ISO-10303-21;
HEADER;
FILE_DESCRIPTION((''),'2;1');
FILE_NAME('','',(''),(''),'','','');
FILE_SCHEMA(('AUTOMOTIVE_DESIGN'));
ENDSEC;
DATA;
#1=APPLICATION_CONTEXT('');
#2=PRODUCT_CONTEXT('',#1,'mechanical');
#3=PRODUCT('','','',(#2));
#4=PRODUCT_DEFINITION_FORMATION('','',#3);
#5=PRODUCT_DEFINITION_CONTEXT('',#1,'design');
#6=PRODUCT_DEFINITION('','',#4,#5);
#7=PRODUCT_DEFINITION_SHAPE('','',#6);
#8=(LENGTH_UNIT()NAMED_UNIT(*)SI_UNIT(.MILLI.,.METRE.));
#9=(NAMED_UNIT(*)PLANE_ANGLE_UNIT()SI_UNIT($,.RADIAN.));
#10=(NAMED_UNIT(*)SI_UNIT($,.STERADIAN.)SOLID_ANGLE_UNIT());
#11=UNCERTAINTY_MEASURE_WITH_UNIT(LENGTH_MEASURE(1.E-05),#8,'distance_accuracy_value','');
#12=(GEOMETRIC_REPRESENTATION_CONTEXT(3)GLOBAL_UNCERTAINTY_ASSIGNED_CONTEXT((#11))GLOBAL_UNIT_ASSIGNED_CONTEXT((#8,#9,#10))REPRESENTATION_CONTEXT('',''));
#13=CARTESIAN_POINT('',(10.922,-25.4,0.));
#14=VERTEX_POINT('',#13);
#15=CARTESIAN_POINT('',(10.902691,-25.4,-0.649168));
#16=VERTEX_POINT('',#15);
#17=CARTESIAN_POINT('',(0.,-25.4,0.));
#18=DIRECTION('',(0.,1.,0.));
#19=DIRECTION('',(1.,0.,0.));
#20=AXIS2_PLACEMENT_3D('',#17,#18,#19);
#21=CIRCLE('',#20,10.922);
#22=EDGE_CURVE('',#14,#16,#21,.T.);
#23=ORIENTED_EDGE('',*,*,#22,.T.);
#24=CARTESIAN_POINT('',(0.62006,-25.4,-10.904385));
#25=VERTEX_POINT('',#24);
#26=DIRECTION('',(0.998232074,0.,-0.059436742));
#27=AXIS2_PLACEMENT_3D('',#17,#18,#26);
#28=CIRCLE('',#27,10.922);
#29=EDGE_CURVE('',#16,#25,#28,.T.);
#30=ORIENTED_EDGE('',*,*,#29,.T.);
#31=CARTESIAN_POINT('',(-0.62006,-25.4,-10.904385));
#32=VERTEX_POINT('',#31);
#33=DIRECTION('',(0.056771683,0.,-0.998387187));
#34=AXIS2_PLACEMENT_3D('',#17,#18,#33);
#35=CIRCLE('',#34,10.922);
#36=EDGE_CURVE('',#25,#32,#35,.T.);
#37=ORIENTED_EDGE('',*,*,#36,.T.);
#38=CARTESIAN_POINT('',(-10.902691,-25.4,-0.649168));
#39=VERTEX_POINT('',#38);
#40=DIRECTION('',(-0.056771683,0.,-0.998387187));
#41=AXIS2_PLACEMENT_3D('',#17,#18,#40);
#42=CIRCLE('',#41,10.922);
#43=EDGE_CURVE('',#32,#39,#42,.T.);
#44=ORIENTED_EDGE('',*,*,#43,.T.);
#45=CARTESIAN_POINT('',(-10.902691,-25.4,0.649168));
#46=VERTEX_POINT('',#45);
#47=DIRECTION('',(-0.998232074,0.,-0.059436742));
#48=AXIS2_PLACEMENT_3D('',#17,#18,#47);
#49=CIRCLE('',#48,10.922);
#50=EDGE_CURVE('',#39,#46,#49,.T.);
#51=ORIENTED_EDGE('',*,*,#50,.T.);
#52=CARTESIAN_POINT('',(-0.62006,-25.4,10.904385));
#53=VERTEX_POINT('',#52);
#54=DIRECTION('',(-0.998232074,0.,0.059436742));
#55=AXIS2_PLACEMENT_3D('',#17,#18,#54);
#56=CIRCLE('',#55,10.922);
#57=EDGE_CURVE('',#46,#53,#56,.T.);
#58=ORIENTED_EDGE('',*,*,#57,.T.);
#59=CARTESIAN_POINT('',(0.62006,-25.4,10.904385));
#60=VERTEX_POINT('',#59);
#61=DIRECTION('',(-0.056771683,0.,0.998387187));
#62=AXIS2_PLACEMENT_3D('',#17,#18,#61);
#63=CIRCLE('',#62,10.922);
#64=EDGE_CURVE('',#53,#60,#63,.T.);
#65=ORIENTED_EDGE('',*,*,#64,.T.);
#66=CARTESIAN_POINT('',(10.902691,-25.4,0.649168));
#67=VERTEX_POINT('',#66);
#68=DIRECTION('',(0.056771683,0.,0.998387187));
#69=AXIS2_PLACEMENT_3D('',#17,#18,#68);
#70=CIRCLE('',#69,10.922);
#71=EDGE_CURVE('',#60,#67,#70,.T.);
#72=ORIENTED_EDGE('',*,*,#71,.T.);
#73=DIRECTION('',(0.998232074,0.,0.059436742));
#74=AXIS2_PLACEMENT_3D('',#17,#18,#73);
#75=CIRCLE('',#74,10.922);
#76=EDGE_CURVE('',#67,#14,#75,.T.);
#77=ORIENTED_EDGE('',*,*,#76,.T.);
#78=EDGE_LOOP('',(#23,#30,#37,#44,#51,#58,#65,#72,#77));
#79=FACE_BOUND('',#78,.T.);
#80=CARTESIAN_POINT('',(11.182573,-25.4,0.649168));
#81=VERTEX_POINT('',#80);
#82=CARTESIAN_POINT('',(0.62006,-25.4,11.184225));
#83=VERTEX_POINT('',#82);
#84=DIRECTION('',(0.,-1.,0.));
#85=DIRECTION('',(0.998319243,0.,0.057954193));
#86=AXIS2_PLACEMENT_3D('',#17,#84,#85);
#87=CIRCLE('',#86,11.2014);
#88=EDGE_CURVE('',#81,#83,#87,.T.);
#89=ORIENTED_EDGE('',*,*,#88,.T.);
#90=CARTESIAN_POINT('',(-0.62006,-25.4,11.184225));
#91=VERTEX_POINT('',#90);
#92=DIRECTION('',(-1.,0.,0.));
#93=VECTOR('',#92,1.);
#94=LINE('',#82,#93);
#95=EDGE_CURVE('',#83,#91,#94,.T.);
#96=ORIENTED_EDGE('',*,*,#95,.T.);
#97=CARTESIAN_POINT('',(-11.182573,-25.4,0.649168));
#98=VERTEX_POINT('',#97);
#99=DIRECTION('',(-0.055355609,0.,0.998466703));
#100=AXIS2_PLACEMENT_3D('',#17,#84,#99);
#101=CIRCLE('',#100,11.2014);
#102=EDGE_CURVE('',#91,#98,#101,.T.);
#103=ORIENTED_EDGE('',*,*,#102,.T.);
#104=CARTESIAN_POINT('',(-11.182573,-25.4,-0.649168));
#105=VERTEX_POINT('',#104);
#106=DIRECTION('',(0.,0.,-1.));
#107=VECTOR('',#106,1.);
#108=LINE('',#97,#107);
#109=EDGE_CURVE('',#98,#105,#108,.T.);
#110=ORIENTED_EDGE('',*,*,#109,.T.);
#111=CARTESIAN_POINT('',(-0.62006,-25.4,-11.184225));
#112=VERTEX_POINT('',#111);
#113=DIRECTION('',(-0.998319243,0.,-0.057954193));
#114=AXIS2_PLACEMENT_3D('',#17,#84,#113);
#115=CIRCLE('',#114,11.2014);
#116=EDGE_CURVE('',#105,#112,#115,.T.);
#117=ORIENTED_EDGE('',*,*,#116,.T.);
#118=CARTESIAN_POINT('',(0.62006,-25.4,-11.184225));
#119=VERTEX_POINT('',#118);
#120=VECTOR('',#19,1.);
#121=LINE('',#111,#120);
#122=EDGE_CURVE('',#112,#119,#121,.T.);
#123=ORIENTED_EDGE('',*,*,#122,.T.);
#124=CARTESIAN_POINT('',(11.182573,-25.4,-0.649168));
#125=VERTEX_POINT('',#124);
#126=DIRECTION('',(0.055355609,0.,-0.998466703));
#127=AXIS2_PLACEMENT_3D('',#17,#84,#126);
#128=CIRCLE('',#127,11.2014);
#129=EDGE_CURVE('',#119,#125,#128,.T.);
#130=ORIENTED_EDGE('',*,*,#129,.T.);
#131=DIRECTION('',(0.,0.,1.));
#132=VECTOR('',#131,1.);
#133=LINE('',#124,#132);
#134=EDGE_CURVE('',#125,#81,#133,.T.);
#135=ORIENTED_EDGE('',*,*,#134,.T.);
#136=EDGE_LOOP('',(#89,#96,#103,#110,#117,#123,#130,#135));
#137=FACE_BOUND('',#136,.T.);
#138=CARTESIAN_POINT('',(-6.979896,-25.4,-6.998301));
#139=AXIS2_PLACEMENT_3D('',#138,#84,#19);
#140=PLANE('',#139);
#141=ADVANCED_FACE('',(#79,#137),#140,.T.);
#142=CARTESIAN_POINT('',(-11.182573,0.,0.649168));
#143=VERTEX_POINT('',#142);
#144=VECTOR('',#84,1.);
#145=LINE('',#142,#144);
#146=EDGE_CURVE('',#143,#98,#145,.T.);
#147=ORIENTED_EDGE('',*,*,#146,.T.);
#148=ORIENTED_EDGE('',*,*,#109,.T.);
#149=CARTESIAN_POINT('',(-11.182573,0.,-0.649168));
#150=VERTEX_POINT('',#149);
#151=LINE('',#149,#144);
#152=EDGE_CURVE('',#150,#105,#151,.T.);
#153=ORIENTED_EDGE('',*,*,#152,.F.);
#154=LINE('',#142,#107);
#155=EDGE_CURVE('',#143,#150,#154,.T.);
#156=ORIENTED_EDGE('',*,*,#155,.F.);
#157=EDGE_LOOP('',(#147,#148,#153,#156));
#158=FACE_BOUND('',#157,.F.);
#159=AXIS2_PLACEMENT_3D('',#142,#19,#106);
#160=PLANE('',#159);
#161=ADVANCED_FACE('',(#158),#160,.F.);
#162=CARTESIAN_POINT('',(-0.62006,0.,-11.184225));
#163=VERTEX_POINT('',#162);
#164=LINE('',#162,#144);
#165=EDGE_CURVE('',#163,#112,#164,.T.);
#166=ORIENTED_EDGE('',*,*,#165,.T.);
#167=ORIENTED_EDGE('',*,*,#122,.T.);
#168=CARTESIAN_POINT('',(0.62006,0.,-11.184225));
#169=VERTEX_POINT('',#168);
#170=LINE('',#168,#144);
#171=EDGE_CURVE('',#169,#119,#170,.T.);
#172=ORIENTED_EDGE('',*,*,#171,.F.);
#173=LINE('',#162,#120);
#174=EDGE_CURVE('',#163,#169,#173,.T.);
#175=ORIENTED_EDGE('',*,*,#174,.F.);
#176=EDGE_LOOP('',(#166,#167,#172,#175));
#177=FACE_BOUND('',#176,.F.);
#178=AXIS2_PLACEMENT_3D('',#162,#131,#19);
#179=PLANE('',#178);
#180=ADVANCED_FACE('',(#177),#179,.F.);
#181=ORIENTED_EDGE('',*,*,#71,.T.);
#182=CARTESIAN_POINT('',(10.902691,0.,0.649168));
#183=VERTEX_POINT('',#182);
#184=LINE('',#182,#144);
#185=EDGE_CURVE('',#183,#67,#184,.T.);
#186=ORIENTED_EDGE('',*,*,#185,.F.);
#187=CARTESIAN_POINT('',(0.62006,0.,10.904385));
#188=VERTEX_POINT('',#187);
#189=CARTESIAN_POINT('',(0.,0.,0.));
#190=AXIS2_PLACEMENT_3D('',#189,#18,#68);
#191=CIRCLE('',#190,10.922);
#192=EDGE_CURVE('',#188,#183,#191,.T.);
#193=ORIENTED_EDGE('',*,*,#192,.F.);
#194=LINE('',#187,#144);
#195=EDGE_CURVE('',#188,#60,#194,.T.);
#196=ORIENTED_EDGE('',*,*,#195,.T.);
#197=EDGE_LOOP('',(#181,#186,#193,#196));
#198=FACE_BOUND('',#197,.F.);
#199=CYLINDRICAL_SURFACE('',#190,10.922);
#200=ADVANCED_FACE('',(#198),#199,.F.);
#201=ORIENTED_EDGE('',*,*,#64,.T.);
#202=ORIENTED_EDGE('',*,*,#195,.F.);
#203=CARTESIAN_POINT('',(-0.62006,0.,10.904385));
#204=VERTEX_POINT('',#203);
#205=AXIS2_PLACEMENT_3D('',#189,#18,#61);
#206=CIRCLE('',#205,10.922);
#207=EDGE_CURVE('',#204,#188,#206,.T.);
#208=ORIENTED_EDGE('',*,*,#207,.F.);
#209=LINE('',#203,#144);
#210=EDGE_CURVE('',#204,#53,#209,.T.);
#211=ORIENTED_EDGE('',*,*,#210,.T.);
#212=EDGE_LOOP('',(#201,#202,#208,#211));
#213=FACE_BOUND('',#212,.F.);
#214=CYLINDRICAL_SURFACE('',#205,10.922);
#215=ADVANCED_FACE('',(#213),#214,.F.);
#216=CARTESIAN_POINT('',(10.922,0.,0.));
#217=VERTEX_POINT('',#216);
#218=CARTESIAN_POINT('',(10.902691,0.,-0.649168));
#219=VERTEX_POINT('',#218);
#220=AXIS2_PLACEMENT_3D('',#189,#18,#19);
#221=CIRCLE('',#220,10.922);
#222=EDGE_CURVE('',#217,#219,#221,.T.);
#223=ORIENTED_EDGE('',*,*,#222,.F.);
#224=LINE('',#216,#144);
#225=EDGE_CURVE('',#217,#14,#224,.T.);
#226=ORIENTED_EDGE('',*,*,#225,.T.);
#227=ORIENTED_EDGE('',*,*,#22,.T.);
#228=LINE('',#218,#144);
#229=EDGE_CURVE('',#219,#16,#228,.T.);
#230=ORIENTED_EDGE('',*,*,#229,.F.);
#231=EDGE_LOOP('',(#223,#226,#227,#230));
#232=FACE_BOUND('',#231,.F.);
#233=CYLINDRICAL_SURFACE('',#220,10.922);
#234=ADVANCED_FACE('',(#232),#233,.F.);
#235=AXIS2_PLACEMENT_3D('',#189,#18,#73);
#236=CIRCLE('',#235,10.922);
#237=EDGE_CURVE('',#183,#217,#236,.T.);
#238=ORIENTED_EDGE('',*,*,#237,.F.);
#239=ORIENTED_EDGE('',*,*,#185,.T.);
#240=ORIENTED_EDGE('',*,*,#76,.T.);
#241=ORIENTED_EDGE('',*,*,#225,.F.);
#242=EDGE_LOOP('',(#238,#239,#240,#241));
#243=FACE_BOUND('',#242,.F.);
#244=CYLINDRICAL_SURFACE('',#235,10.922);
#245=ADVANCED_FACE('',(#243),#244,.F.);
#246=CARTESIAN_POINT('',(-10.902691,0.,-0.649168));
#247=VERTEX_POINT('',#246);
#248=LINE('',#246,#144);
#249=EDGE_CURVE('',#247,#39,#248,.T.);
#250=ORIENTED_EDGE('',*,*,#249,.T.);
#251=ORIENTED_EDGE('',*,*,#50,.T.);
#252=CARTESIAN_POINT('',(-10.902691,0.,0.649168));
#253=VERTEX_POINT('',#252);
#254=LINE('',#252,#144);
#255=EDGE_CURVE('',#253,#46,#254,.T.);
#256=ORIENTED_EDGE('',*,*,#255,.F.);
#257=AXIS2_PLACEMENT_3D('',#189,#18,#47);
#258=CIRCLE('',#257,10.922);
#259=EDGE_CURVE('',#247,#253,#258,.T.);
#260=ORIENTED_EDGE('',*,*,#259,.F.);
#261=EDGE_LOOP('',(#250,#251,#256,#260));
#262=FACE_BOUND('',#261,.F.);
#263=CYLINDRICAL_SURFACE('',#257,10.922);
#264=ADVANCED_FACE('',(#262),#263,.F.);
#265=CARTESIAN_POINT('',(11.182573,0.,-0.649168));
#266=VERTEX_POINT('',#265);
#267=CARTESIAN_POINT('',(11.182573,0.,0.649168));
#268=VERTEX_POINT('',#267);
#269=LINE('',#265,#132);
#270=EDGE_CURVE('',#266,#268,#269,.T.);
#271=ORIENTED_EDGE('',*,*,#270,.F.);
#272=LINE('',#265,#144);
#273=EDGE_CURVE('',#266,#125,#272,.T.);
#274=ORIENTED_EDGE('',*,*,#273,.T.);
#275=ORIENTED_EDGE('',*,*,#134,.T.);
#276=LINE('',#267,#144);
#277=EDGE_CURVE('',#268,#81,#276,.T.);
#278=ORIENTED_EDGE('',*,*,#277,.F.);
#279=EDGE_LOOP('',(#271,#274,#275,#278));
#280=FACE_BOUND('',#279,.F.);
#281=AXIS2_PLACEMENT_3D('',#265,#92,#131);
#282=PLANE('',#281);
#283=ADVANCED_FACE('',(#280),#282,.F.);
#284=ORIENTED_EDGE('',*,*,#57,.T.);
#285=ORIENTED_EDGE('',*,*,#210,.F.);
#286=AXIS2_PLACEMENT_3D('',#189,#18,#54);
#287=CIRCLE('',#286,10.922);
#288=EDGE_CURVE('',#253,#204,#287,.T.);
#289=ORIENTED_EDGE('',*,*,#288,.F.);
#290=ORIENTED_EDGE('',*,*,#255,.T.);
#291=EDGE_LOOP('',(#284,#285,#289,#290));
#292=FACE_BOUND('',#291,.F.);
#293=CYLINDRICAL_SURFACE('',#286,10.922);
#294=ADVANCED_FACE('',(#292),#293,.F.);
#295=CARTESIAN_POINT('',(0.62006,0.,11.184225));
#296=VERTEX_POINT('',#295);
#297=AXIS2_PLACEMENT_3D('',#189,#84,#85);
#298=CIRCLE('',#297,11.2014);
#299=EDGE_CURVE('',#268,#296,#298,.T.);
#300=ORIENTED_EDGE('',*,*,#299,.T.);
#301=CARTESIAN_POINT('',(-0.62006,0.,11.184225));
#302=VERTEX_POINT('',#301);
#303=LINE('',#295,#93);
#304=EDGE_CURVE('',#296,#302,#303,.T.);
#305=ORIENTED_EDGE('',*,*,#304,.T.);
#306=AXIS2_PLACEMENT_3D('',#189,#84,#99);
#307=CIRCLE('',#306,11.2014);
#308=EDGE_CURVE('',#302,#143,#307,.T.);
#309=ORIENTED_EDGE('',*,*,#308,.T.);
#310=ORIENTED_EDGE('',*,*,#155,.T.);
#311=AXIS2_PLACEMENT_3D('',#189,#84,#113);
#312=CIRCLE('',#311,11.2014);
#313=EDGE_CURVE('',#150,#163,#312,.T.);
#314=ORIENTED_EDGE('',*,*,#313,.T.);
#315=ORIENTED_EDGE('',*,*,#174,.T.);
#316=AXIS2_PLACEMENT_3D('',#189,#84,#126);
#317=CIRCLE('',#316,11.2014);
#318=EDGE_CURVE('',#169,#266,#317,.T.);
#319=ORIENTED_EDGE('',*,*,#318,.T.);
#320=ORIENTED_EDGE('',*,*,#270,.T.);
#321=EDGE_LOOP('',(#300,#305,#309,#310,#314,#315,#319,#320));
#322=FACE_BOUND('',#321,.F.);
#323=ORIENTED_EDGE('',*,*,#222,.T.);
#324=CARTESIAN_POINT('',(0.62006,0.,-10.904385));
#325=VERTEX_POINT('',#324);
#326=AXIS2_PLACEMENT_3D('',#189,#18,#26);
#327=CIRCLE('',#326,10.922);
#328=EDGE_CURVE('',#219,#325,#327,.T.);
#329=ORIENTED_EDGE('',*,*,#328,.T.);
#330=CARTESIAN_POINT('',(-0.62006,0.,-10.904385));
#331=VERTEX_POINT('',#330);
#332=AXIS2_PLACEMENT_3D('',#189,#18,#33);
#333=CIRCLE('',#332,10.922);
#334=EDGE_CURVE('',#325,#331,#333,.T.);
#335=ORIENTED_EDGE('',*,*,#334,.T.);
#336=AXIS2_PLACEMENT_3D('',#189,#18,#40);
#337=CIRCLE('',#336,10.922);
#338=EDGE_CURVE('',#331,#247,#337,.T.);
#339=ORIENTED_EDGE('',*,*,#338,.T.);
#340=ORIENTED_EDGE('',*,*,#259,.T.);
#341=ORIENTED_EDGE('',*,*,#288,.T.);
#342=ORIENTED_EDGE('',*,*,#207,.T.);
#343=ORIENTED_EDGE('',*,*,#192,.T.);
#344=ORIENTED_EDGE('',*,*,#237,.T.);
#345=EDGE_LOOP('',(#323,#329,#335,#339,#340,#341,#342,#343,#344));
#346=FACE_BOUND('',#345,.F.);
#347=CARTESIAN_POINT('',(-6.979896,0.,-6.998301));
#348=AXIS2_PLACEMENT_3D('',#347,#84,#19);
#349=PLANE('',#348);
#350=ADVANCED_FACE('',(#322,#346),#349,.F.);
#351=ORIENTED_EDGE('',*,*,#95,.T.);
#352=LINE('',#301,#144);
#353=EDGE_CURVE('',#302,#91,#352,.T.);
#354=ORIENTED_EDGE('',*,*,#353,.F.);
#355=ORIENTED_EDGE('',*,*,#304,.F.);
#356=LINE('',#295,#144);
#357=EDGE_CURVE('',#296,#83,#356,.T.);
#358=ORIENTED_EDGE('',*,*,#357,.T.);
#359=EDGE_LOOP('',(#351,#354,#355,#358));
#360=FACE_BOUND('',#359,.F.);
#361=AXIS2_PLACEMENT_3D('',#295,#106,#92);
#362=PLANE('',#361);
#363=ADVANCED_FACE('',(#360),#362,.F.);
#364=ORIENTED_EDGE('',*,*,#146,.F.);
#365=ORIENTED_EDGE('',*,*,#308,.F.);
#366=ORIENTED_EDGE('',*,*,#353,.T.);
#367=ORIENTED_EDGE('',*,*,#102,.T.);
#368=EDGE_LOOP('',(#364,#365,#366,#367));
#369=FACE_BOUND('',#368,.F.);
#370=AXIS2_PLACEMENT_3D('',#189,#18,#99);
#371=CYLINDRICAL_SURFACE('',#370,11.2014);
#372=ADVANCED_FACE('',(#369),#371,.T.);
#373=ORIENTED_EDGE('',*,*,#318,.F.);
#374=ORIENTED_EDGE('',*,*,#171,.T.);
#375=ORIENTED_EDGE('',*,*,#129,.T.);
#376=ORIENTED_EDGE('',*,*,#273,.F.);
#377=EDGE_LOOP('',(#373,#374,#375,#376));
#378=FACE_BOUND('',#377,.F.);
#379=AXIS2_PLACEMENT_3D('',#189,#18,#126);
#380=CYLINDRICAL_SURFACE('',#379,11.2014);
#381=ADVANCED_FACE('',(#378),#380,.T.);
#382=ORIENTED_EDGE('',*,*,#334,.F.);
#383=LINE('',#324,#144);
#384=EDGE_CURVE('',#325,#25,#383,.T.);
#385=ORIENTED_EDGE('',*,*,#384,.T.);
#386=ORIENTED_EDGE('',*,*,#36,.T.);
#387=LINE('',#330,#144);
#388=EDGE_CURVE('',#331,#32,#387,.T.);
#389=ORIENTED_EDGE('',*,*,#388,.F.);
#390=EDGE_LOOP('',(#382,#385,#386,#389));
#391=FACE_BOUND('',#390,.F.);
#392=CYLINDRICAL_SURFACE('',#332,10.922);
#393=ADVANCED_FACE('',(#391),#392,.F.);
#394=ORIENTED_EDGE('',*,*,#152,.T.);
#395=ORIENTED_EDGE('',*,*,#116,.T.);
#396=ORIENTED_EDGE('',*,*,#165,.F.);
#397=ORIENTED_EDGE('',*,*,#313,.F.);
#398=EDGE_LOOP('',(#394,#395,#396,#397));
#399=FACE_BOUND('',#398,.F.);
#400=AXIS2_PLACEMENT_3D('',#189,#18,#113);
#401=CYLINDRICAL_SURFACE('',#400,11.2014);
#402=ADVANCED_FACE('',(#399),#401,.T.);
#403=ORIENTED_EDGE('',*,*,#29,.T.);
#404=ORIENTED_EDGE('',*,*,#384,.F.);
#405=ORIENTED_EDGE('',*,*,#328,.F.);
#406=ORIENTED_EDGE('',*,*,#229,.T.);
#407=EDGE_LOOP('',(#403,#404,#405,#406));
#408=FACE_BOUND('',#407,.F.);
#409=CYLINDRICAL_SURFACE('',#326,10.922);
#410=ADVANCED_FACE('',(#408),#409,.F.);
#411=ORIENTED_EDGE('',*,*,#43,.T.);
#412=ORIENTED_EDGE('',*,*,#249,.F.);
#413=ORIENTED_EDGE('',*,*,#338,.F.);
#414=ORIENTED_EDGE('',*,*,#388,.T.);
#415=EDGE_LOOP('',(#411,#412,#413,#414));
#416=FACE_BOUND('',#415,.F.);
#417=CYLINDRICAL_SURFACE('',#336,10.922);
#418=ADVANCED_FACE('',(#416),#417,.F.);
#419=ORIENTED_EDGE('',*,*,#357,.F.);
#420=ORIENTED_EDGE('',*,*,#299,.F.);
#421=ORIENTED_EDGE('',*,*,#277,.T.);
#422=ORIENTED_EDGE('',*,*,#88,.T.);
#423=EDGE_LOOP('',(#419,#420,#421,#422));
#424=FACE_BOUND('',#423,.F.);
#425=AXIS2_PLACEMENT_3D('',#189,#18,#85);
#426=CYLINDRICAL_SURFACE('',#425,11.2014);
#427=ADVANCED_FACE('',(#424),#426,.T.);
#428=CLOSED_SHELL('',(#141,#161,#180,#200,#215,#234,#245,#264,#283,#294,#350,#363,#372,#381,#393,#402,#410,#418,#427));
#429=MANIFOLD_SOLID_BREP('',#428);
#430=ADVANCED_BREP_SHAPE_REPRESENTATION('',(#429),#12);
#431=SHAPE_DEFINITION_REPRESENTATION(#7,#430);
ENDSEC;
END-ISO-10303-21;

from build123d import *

# Parameters (mm, degrees)
F1_DEPTH = 25.4


# Not quite as in the source:
# - the program builds the solid bodies; features that only make, move or delete a surface that nothing else refers to are left out


with BuildPart() as f1:
    # F0 (on Front) → F1 (new body)
    with BuildSketch(Plane.XZ):
        with BuildLine():
            ThreePointArc((-11.1825731718, -0.6491680963), (-7.9102714826, -7.9308869007), (-0.6200603199, -11.1842249244))
            Line((-0.6200603199, -11.1842249244), (-0.6200603199, -10.9043848611))
            ThreePointArc((-0.6200603199, -10.9043848611), (-7.7127048151, -7.7333219534), (-10.902690713, -0.6491680963))
            Line((-10.902690713, -0.6491680963), (-11.1825731718, -0.6491680963))
        make_face()
        with BuildLine():
            Line((-10.902690713, 0.6491680963), (-11.1825731718, 0.6491680963))
            Line((-11.1825731718, 0.6491680963), (-11.1825731718, -0.6491680963))
            Line((-11.1825731718, -0.6491680963), (-10.902690713, -0.6491680963))
            ThreePointArc((-10.902690713, -0.6491680963), (-10.922, 0), (-10.902690713, 0.6491680963))
        make_face()
        with BuildLine():
            Line((-0.6200603199, 10.9043848611), (-0.6200603199, 11.1842249244))
            ThreePointArc((-0.6200603199, 11.1842249244), (-7.9102714826, 7.9308869007), (-11.1825731718, 0.6491680963))
            Line((-11.1825731718, 0.6491680963), (-10.902690713, 0.6491680963))
            ThreePointArc((-10.902690713, 0.6491680963), (-7.7127048151, 7.7333219534), (-0.6200603199, 10.9043848611))
        make_face()
        with BuildLine():
            Line((0.6200603199, 10.9043848611), (0.6200603199, 11.1842249244))
            Line((0.6200603199, 11.1842249244), (-0.6200603199, 11.1842249244))
            Line((-0.6200603199, 11.1842249244), (-0.6200603199, 10.9043848611))
            ThreePointArc((-0.6200603199, 10.9043848611), (0, 10.922), (0.6200603199, 10.9043848611))
        make_face()
        with BuildLine():
            Line((10.902690713, 0.6491680963), (11.1825731718, 0.6491680963))
            ThreePointArc((11.1825731718, 0.6491680963), (7.9102714826, 7.9308869007), (0.6200603199, 11.1842249244))
            Line((0.6200603199, 11.1842249244), (0.6200603199, 10.9043848611))
            ThreePointArc((0.6200603199, 10.9043848611), (7.7127048151, 7.7333219534), (10.902690713, 0.6491680963))
        make_face()
        with BuildLine():
            Line((11.1825731718, -0.6491680963), (11.1825731718, 0.6491680963))
            Line((11.1825731718, 0.6491680963), (10.902690713, 0.6491680963))
            ThreePointArc((10.902690713, 0.6491680963), (10.917171611, 0.3247276035), (10.922, 0))
            ThreePointArc((10.922, 0), (10.917171611, -0.3247276035), (10.902690713, -0.6491680963))
            Line((10.902690713, -0.6491680963), (11.1825731718, -0.6491680963))
        make_face()
        with BuildLine():
            ThreePointArc((0.6200603199, -11.1842249244), (7.9102714826, -7.9308869007), (11.1825731718, -0.6491680963))
            Line((11.1825731718, -0.6491680963), (10.902690713, -0.6491680963))
            ThreePointArc((10.902690713, -0.6491680963), (7.7127048151, -7.7333219534), (0.6200603199, -10.9043848611))
            Line((0.6200603199, -10.9043848611), (0.6200603199, -11.1842249244))
        make_face()
        with BuildLine():
            Line((-0.6200603199, -11.1842249244), (0.6200603199, -11.1842249244))
            Line((0.6200603199, -11.1842249244), (0.6200603199, -10.9043848611))
            ThreePointArc((0.6200603199, -10.9043848611), (0, -10.922), (-0.6200603199, -10.9043848611))
            Line((-0.6200603199, -10.9043848611), (-0.6200603199, -11.1842249244))
        make_face()
    extrude(amount=F1_DEPTH)


solid = f1.part
